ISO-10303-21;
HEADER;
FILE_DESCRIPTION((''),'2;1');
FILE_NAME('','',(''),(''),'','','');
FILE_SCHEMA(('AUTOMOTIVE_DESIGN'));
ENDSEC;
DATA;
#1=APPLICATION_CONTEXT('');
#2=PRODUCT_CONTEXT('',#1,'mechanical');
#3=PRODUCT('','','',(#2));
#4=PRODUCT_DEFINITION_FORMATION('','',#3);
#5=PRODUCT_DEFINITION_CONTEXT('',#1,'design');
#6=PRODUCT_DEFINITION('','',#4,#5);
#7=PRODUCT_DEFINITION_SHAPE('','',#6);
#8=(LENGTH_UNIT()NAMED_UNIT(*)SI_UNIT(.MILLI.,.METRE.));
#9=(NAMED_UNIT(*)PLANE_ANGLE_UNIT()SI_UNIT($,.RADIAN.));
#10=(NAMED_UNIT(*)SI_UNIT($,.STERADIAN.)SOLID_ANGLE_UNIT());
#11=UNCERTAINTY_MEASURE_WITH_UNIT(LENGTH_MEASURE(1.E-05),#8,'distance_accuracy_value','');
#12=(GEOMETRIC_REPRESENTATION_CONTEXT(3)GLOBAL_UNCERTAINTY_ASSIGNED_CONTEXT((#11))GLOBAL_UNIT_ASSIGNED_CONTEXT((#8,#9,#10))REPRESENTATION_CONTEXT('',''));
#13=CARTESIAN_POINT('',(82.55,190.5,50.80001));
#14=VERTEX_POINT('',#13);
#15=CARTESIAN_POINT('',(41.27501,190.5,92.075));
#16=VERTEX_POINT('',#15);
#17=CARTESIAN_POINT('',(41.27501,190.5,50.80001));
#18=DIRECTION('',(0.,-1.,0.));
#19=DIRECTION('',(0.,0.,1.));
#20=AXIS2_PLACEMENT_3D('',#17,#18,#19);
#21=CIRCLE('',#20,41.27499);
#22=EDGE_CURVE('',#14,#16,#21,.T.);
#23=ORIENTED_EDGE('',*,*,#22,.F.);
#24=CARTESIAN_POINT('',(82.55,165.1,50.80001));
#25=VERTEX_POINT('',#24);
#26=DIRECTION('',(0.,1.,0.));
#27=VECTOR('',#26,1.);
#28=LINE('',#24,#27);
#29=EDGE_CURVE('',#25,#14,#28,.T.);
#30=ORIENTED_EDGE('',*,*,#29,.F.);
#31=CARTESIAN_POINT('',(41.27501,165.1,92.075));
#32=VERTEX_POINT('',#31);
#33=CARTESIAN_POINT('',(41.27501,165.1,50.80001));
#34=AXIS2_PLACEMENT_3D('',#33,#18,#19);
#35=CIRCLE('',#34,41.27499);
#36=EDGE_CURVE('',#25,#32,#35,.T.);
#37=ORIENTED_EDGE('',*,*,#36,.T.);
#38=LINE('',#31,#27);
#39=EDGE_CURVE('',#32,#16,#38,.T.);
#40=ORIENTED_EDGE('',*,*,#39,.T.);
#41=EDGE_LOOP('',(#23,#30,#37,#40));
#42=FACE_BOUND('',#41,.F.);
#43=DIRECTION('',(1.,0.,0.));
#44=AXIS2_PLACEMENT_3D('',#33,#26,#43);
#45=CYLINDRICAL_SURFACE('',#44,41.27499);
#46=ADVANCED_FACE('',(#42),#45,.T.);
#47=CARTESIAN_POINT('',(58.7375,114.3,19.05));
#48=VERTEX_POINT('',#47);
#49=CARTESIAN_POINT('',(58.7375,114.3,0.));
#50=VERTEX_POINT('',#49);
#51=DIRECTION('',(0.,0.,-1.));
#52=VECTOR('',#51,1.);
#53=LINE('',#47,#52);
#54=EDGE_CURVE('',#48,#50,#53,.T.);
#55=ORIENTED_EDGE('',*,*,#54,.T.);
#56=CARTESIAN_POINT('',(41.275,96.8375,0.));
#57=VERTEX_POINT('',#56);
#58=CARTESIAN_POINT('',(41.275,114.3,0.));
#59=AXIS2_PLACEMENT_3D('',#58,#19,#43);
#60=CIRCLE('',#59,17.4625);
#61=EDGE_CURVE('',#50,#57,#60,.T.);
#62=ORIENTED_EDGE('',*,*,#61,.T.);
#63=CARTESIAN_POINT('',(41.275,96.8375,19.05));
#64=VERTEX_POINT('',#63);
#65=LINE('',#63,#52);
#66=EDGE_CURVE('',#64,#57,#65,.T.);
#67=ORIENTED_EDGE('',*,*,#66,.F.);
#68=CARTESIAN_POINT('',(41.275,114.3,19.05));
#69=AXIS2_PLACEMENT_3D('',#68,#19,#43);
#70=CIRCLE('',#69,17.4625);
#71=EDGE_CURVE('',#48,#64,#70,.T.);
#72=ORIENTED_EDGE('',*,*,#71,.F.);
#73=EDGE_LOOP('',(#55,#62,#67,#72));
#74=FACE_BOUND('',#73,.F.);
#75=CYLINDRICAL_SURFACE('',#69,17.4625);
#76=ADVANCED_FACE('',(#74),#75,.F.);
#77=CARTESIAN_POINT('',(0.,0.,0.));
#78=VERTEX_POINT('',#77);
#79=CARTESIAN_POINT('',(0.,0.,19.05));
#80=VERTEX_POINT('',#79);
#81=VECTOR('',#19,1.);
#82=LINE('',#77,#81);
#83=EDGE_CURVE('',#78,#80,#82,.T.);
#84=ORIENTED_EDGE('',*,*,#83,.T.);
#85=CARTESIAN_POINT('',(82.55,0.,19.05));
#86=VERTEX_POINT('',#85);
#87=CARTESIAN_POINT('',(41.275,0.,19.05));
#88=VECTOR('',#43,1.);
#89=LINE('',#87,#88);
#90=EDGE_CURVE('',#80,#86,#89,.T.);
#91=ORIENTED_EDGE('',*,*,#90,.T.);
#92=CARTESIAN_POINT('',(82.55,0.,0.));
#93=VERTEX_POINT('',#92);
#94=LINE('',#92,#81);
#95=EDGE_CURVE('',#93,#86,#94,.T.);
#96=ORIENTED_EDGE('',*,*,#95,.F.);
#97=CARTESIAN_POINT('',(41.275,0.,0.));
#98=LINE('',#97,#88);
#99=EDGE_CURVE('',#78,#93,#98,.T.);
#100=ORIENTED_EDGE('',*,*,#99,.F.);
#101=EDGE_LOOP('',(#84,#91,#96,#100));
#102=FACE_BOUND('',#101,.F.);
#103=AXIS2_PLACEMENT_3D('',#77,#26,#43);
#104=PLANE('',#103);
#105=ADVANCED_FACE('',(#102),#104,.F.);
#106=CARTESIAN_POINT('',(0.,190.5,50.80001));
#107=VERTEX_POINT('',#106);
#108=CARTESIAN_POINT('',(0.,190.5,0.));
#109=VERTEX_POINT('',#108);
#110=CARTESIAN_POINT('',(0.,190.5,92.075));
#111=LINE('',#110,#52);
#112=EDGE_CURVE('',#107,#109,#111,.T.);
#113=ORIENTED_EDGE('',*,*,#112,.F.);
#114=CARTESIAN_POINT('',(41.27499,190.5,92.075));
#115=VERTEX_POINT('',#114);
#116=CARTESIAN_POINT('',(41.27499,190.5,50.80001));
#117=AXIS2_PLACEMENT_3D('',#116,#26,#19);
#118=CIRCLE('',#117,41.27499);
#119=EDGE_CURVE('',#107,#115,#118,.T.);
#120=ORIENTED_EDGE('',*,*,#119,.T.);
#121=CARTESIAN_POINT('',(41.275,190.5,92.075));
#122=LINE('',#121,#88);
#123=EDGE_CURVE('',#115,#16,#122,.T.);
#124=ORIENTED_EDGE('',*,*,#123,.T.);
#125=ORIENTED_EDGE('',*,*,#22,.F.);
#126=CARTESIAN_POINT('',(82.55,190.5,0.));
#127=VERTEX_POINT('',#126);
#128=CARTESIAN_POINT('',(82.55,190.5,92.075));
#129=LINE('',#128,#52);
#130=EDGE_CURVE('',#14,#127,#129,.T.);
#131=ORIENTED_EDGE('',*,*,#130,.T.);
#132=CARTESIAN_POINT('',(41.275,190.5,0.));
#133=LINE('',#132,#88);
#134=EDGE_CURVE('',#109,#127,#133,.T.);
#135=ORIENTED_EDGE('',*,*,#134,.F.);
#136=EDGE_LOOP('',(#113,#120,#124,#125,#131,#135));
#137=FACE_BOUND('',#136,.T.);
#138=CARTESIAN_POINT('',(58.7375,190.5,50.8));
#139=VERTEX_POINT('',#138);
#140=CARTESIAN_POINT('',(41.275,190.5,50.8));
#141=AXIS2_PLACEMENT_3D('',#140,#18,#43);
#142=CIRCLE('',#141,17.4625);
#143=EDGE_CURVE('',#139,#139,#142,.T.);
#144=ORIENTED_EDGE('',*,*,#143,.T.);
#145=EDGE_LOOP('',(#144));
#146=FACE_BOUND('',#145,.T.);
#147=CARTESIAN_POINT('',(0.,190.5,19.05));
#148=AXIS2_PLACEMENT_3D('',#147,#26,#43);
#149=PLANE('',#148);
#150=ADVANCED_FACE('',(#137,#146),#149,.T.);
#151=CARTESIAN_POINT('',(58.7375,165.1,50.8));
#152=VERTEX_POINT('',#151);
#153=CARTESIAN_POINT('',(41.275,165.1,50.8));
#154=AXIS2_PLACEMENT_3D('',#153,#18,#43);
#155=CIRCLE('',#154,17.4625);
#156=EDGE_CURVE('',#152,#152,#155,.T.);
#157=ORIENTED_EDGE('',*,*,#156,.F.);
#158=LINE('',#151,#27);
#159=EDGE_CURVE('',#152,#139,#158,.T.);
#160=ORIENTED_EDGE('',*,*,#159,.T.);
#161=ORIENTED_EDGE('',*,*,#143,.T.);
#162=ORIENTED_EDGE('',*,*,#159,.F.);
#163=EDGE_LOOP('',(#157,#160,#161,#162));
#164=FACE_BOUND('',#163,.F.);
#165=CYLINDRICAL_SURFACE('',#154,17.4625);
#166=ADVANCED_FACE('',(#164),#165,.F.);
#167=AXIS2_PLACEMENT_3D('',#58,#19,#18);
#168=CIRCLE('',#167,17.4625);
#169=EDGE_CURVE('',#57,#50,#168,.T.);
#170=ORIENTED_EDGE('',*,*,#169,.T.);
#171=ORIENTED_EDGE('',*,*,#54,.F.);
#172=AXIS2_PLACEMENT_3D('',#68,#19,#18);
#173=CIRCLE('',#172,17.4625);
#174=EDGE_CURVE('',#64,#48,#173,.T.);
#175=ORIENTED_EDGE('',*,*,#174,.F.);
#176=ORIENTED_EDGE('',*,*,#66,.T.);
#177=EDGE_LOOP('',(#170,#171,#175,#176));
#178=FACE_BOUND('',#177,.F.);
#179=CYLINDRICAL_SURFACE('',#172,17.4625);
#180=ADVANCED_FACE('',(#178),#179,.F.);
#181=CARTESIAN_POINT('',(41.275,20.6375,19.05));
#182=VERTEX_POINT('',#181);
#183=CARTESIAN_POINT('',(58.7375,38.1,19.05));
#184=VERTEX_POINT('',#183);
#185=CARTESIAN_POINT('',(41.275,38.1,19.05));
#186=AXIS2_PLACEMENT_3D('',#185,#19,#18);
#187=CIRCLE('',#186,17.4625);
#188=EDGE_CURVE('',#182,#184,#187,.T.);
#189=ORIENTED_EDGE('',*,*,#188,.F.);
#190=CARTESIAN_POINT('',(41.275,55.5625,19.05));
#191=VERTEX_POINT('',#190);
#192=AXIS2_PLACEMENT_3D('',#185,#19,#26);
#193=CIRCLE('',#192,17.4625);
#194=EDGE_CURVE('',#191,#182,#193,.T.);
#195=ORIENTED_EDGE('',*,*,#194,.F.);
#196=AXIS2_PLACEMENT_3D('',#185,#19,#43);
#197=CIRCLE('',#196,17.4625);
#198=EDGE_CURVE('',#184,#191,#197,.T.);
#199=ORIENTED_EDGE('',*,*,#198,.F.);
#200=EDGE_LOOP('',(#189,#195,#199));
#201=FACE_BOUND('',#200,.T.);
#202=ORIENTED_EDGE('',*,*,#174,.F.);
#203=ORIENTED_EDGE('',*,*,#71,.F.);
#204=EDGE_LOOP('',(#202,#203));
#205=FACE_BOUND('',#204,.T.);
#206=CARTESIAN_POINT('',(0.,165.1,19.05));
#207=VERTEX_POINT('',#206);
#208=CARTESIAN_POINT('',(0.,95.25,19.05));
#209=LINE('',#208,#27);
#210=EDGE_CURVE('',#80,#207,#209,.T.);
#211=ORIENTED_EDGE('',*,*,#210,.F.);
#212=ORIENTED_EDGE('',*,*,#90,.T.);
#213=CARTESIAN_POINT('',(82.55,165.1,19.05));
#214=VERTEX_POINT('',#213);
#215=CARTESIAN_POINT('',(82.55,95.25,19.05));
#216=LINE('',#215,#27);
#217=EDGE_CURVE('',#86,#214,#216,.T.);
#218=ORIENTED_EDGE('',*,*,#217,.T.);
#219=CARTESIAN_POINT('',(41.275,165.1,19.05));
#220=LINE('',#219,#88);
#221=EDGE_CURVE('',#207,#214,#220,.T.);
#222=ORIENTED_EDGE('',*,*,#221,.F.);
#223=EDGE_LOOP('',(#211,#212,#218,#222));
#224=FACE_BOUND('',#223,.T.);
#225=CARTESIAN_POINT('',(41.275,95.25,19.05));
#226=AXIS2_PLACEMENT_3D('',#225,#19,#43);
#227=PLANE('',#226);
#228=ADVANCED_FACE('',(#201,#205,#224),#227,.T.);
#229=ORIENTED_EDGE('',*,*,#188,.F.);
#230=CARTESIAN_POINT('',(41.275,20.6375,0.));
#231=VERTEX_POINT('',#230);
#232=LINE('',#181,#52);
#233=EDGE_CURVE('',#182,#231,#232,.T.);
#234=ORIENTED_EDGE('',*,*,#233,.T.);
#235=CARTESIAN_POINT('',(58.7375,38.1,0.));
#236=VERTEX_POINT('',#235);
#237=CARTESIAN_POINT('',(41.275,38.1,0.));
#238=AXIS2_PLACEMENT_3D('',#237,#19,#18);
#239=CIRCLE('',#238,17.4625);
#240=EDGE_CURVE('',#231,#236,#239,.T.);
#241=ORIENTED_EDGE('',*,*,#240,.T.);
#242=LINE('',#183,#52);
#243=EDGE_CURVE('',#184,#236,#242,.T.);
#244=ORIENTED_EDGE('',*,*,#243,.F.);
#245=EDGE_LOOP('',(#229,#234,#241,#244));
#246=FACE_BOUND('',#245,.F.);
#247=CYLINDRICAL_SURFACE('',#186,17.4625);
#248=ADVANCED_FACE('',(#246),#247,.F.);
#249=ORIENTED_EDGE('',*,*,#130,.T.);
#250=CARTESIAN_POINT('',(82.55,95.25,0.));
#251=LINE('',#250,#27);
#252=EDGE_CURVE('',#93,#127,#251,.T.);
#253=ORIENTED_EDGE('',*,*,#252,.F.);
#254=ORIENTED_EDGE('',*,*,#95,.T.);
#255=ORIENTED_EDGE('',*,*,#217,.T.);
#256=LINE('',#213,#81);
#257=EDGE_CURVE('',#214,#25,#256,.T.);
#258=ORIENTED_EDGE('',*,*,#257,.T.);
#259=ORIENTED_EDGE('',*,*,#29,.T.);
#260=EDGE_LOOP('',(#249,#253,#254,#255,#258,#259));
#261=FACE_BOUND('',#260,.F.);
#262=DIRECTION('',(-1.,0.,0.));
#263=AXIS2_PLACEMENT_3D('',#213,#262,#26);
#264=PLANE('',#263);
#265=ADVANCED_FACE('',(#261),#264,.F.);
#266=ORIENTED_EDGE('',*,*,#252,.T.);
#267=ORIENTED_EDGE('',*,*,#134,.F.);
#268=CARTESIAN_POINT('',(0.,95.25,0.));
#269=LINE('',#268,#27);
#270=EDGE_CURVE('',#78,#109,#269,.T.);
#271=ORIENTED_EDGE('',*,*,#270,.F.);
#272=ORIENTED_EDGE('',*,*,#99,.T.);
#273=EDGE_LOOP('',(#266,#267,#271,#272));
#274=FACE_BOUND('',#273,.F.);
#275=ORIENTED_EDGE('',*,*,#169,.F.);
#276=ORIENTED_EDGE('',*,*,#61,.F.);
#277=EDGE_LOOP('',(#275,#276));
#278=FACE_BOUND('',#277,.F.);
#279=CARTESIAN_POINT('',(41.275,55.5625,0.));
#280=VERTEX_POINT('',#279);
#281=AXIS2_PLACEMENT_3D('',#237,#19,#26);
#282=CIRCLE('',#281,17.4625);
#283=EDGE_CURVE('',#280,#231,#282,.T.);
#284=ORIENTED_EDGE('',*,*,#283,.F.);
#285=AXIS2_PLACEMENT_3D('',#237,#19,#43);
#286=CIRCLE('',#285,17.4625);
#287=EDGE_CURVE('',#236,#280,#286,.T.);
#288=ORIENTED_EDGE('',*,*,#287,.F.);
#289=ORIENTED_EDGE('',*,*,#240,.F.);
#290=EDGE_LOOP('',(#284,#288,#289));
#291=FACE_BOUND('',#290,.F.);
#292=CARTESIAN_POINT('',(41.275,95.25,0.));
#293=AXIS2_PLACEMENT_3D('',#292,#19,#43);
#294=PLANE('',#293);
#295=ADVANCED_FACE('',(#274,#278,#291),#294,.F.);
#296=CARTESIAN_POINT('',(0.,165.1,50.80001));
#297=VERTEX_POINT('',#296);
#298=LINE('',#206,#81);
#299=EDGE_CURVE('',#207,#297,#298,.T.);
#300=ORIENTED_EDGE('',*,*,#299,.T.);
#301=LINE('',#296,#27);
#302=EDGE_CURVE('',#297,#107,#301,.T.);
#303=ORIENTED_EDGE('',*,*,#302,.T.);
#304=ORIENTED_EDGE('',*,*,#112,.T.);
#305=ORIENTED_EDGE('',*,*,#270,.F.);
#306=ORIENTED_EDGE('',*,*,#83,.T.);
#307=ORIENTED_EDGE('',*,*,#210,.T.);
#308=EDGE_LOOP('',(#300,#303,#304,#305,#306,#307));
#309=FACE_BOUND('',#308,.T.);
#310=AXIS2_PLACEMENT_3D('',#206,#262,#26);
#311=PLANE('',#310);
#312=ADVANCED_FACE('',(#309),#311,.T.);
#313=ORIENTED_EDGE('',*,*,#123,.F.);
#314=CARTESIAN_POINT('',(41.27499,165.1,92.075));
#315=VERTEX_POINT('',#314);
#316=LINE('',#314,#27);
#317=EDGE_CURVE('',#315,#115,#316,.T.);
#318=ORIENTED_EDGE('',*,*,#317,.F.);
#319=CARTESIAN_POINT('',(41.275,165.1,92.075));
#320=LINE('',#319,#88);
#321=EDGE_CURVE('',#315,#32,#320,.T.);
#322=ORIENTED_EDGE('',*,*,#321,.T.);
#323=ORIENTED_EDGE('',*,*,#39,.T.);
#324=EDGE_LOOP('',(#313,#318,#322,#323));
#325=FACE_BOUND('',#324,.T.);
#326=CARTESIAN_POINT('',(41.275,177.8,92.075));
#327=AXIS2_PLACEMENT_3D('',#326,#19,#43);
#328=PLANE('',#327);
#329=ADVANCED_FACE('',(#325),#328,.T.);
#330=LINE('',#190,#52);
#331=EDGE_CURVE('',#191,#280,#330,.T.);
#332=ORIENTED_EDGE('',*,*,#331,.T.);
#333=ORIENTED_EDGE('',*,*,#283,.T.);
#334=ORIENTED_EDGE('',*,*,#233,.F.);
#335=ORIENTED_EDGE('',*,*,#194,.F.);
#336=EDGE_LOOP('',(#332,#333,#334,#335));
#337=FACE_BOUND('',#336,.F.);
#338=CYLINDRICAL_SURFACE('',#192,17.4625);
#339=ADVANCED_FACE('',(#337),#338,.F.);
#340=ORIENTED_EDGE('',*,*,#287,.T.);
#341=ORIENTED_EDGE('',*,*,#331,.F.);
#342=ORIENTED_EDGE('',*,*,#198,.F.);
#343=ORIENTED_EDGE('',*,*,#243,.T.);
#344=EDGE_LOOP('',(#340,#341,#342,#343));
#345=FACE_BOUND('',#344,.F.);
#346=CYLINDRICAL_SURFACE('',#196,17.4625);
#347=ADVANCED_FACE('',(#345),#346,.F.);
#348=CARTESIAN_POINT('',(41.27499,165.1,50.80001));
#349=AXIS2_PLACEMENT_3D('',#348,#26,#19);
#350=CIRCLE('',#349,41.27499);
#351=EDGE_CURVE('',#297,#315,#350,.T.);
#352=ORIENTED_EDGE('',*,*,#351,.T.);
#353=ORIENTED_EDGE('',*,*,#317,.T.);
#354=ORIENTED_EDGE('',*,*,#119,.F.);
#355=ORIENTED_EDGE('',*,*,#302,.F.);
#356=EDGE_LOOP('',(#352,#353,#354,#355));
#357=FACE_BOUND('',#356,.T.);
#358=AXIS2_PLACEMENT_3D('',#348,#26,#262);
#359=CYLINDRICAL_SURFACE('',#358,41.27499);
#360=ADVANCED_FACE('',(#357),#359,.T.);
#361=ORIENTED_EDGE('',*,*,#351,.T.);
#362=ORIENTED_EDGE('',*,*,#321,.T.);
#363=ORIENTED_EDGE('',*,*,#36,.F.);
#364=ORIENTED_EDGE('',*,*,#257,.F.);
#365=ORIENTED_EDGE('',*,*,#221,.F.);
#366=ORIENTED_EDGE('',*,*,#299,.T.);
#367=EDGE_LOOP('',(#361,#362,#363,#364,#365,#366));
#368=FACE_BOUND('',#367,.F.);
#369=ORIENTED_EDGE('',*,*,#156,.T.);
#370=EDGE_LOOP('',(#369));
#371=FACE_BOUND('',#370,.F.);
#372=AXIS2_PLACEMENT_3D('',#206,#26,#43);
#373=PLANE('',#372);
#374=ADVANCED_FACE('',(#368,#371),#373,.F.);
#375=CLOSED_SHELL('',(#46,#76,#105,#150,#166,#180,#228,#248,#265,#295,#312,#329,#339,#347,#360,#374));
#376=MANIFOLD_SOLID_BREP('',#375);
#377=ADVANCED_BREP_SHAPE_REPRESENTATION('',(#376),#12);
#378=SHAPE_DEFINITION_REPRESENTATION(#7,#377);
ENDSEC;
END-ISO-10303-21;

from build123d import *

# Parameters (mm, degrees)
F0_W     = 82.55
F0_H     = 190.5
F1_DEPTH = 19.05
F2_W     = 82.55
F2_H     = 25.4
F3_DEPTH = 73.025
F4_R     = 41.27499
F5_R     = 17.4625
F6_DEPTH = 25.4
F8_DEPTH = 25.4


# Not quite as in the source:
# - a fillet or chamfer is up to 0.001 mm smaller than in the source, because OpenCascade refuses the exact size


with BuildPart() as f1:
    # F0 (on Top) → F1 (new body)
    with BuildSketch(Plane.XY):
        with Locations((41.275, 95.25)):
            Rectangle(F0_W, F0_H)
    extrude(amount=F1_DEPTH)

    # F2 (on face) → F3 (join)
    with BuildSketch(Plane.XY.offset(19.05)):
        with Locations((41.275, 177.8)):
            Rectangle(F2_W, F2_H)
    extrude(amount=F3_DEPTH)

    # F4 (radius 41.275 in the source; OpenCascade refuses exactly that, so slightly less here)
    f4_edges = [f1.edges().sort_by_distance(p)[0] for p in [
        (0, 177.8, 92.075),
        (82.55, 177.8, 92.075),
    ]]
    fillet(f4_edges, radius=F4_R)

    # F5 (on face) → F6 (cut)
    with BuildSketch(Plane.XZ.offset(-165.1)):
        with Locations((41.275, 50.8)):
            Circle(F5_R)
    extrude(amount=-F6_DEPTH, mode=Mode.SUBTRACT)

    # F7 (on face) → F8 (cut)
    with BuildSketch(Plane.XY.offset(19.05)):
        with BuildLine():
            ThreePointArc((58.7375, 114.3), (28.9271478335, 126.6478521665), (41.275, 96.8375))
            ThreePointArc((41.275, 96.8375), (53.6228521665, 101.9521478335), (58.7375, 114.3))
        make_face()
        with BuildLine():
            Line((41.275, 38.1), (41.275, 20.6375))
            ThreePointArc((41.275, 20.6375), (53.6228521665, 25.7521478335), (58.7375, 38.1))
            ThreePointArc((58.7375, 38.1), (53.6228521665, 50.4478521665), (41.275, 55.5625))
            Line((41.275, 55.5625), (41.275, 38.1))
        make_face()
        with BuildLine():
            ThreePointArc((41.275, 55.5625), (23.8125, 38.1), (41.275, 20.6375))
            Line((41.275, 20.6375), (41.275, 38.1))
            Line((41.275, 38.1), (41.275, 55.5625))
        make_face()
    extrude(amount=-F8_DEPTH, mode=Mode.SUBTRACT)


solid = f1.part
